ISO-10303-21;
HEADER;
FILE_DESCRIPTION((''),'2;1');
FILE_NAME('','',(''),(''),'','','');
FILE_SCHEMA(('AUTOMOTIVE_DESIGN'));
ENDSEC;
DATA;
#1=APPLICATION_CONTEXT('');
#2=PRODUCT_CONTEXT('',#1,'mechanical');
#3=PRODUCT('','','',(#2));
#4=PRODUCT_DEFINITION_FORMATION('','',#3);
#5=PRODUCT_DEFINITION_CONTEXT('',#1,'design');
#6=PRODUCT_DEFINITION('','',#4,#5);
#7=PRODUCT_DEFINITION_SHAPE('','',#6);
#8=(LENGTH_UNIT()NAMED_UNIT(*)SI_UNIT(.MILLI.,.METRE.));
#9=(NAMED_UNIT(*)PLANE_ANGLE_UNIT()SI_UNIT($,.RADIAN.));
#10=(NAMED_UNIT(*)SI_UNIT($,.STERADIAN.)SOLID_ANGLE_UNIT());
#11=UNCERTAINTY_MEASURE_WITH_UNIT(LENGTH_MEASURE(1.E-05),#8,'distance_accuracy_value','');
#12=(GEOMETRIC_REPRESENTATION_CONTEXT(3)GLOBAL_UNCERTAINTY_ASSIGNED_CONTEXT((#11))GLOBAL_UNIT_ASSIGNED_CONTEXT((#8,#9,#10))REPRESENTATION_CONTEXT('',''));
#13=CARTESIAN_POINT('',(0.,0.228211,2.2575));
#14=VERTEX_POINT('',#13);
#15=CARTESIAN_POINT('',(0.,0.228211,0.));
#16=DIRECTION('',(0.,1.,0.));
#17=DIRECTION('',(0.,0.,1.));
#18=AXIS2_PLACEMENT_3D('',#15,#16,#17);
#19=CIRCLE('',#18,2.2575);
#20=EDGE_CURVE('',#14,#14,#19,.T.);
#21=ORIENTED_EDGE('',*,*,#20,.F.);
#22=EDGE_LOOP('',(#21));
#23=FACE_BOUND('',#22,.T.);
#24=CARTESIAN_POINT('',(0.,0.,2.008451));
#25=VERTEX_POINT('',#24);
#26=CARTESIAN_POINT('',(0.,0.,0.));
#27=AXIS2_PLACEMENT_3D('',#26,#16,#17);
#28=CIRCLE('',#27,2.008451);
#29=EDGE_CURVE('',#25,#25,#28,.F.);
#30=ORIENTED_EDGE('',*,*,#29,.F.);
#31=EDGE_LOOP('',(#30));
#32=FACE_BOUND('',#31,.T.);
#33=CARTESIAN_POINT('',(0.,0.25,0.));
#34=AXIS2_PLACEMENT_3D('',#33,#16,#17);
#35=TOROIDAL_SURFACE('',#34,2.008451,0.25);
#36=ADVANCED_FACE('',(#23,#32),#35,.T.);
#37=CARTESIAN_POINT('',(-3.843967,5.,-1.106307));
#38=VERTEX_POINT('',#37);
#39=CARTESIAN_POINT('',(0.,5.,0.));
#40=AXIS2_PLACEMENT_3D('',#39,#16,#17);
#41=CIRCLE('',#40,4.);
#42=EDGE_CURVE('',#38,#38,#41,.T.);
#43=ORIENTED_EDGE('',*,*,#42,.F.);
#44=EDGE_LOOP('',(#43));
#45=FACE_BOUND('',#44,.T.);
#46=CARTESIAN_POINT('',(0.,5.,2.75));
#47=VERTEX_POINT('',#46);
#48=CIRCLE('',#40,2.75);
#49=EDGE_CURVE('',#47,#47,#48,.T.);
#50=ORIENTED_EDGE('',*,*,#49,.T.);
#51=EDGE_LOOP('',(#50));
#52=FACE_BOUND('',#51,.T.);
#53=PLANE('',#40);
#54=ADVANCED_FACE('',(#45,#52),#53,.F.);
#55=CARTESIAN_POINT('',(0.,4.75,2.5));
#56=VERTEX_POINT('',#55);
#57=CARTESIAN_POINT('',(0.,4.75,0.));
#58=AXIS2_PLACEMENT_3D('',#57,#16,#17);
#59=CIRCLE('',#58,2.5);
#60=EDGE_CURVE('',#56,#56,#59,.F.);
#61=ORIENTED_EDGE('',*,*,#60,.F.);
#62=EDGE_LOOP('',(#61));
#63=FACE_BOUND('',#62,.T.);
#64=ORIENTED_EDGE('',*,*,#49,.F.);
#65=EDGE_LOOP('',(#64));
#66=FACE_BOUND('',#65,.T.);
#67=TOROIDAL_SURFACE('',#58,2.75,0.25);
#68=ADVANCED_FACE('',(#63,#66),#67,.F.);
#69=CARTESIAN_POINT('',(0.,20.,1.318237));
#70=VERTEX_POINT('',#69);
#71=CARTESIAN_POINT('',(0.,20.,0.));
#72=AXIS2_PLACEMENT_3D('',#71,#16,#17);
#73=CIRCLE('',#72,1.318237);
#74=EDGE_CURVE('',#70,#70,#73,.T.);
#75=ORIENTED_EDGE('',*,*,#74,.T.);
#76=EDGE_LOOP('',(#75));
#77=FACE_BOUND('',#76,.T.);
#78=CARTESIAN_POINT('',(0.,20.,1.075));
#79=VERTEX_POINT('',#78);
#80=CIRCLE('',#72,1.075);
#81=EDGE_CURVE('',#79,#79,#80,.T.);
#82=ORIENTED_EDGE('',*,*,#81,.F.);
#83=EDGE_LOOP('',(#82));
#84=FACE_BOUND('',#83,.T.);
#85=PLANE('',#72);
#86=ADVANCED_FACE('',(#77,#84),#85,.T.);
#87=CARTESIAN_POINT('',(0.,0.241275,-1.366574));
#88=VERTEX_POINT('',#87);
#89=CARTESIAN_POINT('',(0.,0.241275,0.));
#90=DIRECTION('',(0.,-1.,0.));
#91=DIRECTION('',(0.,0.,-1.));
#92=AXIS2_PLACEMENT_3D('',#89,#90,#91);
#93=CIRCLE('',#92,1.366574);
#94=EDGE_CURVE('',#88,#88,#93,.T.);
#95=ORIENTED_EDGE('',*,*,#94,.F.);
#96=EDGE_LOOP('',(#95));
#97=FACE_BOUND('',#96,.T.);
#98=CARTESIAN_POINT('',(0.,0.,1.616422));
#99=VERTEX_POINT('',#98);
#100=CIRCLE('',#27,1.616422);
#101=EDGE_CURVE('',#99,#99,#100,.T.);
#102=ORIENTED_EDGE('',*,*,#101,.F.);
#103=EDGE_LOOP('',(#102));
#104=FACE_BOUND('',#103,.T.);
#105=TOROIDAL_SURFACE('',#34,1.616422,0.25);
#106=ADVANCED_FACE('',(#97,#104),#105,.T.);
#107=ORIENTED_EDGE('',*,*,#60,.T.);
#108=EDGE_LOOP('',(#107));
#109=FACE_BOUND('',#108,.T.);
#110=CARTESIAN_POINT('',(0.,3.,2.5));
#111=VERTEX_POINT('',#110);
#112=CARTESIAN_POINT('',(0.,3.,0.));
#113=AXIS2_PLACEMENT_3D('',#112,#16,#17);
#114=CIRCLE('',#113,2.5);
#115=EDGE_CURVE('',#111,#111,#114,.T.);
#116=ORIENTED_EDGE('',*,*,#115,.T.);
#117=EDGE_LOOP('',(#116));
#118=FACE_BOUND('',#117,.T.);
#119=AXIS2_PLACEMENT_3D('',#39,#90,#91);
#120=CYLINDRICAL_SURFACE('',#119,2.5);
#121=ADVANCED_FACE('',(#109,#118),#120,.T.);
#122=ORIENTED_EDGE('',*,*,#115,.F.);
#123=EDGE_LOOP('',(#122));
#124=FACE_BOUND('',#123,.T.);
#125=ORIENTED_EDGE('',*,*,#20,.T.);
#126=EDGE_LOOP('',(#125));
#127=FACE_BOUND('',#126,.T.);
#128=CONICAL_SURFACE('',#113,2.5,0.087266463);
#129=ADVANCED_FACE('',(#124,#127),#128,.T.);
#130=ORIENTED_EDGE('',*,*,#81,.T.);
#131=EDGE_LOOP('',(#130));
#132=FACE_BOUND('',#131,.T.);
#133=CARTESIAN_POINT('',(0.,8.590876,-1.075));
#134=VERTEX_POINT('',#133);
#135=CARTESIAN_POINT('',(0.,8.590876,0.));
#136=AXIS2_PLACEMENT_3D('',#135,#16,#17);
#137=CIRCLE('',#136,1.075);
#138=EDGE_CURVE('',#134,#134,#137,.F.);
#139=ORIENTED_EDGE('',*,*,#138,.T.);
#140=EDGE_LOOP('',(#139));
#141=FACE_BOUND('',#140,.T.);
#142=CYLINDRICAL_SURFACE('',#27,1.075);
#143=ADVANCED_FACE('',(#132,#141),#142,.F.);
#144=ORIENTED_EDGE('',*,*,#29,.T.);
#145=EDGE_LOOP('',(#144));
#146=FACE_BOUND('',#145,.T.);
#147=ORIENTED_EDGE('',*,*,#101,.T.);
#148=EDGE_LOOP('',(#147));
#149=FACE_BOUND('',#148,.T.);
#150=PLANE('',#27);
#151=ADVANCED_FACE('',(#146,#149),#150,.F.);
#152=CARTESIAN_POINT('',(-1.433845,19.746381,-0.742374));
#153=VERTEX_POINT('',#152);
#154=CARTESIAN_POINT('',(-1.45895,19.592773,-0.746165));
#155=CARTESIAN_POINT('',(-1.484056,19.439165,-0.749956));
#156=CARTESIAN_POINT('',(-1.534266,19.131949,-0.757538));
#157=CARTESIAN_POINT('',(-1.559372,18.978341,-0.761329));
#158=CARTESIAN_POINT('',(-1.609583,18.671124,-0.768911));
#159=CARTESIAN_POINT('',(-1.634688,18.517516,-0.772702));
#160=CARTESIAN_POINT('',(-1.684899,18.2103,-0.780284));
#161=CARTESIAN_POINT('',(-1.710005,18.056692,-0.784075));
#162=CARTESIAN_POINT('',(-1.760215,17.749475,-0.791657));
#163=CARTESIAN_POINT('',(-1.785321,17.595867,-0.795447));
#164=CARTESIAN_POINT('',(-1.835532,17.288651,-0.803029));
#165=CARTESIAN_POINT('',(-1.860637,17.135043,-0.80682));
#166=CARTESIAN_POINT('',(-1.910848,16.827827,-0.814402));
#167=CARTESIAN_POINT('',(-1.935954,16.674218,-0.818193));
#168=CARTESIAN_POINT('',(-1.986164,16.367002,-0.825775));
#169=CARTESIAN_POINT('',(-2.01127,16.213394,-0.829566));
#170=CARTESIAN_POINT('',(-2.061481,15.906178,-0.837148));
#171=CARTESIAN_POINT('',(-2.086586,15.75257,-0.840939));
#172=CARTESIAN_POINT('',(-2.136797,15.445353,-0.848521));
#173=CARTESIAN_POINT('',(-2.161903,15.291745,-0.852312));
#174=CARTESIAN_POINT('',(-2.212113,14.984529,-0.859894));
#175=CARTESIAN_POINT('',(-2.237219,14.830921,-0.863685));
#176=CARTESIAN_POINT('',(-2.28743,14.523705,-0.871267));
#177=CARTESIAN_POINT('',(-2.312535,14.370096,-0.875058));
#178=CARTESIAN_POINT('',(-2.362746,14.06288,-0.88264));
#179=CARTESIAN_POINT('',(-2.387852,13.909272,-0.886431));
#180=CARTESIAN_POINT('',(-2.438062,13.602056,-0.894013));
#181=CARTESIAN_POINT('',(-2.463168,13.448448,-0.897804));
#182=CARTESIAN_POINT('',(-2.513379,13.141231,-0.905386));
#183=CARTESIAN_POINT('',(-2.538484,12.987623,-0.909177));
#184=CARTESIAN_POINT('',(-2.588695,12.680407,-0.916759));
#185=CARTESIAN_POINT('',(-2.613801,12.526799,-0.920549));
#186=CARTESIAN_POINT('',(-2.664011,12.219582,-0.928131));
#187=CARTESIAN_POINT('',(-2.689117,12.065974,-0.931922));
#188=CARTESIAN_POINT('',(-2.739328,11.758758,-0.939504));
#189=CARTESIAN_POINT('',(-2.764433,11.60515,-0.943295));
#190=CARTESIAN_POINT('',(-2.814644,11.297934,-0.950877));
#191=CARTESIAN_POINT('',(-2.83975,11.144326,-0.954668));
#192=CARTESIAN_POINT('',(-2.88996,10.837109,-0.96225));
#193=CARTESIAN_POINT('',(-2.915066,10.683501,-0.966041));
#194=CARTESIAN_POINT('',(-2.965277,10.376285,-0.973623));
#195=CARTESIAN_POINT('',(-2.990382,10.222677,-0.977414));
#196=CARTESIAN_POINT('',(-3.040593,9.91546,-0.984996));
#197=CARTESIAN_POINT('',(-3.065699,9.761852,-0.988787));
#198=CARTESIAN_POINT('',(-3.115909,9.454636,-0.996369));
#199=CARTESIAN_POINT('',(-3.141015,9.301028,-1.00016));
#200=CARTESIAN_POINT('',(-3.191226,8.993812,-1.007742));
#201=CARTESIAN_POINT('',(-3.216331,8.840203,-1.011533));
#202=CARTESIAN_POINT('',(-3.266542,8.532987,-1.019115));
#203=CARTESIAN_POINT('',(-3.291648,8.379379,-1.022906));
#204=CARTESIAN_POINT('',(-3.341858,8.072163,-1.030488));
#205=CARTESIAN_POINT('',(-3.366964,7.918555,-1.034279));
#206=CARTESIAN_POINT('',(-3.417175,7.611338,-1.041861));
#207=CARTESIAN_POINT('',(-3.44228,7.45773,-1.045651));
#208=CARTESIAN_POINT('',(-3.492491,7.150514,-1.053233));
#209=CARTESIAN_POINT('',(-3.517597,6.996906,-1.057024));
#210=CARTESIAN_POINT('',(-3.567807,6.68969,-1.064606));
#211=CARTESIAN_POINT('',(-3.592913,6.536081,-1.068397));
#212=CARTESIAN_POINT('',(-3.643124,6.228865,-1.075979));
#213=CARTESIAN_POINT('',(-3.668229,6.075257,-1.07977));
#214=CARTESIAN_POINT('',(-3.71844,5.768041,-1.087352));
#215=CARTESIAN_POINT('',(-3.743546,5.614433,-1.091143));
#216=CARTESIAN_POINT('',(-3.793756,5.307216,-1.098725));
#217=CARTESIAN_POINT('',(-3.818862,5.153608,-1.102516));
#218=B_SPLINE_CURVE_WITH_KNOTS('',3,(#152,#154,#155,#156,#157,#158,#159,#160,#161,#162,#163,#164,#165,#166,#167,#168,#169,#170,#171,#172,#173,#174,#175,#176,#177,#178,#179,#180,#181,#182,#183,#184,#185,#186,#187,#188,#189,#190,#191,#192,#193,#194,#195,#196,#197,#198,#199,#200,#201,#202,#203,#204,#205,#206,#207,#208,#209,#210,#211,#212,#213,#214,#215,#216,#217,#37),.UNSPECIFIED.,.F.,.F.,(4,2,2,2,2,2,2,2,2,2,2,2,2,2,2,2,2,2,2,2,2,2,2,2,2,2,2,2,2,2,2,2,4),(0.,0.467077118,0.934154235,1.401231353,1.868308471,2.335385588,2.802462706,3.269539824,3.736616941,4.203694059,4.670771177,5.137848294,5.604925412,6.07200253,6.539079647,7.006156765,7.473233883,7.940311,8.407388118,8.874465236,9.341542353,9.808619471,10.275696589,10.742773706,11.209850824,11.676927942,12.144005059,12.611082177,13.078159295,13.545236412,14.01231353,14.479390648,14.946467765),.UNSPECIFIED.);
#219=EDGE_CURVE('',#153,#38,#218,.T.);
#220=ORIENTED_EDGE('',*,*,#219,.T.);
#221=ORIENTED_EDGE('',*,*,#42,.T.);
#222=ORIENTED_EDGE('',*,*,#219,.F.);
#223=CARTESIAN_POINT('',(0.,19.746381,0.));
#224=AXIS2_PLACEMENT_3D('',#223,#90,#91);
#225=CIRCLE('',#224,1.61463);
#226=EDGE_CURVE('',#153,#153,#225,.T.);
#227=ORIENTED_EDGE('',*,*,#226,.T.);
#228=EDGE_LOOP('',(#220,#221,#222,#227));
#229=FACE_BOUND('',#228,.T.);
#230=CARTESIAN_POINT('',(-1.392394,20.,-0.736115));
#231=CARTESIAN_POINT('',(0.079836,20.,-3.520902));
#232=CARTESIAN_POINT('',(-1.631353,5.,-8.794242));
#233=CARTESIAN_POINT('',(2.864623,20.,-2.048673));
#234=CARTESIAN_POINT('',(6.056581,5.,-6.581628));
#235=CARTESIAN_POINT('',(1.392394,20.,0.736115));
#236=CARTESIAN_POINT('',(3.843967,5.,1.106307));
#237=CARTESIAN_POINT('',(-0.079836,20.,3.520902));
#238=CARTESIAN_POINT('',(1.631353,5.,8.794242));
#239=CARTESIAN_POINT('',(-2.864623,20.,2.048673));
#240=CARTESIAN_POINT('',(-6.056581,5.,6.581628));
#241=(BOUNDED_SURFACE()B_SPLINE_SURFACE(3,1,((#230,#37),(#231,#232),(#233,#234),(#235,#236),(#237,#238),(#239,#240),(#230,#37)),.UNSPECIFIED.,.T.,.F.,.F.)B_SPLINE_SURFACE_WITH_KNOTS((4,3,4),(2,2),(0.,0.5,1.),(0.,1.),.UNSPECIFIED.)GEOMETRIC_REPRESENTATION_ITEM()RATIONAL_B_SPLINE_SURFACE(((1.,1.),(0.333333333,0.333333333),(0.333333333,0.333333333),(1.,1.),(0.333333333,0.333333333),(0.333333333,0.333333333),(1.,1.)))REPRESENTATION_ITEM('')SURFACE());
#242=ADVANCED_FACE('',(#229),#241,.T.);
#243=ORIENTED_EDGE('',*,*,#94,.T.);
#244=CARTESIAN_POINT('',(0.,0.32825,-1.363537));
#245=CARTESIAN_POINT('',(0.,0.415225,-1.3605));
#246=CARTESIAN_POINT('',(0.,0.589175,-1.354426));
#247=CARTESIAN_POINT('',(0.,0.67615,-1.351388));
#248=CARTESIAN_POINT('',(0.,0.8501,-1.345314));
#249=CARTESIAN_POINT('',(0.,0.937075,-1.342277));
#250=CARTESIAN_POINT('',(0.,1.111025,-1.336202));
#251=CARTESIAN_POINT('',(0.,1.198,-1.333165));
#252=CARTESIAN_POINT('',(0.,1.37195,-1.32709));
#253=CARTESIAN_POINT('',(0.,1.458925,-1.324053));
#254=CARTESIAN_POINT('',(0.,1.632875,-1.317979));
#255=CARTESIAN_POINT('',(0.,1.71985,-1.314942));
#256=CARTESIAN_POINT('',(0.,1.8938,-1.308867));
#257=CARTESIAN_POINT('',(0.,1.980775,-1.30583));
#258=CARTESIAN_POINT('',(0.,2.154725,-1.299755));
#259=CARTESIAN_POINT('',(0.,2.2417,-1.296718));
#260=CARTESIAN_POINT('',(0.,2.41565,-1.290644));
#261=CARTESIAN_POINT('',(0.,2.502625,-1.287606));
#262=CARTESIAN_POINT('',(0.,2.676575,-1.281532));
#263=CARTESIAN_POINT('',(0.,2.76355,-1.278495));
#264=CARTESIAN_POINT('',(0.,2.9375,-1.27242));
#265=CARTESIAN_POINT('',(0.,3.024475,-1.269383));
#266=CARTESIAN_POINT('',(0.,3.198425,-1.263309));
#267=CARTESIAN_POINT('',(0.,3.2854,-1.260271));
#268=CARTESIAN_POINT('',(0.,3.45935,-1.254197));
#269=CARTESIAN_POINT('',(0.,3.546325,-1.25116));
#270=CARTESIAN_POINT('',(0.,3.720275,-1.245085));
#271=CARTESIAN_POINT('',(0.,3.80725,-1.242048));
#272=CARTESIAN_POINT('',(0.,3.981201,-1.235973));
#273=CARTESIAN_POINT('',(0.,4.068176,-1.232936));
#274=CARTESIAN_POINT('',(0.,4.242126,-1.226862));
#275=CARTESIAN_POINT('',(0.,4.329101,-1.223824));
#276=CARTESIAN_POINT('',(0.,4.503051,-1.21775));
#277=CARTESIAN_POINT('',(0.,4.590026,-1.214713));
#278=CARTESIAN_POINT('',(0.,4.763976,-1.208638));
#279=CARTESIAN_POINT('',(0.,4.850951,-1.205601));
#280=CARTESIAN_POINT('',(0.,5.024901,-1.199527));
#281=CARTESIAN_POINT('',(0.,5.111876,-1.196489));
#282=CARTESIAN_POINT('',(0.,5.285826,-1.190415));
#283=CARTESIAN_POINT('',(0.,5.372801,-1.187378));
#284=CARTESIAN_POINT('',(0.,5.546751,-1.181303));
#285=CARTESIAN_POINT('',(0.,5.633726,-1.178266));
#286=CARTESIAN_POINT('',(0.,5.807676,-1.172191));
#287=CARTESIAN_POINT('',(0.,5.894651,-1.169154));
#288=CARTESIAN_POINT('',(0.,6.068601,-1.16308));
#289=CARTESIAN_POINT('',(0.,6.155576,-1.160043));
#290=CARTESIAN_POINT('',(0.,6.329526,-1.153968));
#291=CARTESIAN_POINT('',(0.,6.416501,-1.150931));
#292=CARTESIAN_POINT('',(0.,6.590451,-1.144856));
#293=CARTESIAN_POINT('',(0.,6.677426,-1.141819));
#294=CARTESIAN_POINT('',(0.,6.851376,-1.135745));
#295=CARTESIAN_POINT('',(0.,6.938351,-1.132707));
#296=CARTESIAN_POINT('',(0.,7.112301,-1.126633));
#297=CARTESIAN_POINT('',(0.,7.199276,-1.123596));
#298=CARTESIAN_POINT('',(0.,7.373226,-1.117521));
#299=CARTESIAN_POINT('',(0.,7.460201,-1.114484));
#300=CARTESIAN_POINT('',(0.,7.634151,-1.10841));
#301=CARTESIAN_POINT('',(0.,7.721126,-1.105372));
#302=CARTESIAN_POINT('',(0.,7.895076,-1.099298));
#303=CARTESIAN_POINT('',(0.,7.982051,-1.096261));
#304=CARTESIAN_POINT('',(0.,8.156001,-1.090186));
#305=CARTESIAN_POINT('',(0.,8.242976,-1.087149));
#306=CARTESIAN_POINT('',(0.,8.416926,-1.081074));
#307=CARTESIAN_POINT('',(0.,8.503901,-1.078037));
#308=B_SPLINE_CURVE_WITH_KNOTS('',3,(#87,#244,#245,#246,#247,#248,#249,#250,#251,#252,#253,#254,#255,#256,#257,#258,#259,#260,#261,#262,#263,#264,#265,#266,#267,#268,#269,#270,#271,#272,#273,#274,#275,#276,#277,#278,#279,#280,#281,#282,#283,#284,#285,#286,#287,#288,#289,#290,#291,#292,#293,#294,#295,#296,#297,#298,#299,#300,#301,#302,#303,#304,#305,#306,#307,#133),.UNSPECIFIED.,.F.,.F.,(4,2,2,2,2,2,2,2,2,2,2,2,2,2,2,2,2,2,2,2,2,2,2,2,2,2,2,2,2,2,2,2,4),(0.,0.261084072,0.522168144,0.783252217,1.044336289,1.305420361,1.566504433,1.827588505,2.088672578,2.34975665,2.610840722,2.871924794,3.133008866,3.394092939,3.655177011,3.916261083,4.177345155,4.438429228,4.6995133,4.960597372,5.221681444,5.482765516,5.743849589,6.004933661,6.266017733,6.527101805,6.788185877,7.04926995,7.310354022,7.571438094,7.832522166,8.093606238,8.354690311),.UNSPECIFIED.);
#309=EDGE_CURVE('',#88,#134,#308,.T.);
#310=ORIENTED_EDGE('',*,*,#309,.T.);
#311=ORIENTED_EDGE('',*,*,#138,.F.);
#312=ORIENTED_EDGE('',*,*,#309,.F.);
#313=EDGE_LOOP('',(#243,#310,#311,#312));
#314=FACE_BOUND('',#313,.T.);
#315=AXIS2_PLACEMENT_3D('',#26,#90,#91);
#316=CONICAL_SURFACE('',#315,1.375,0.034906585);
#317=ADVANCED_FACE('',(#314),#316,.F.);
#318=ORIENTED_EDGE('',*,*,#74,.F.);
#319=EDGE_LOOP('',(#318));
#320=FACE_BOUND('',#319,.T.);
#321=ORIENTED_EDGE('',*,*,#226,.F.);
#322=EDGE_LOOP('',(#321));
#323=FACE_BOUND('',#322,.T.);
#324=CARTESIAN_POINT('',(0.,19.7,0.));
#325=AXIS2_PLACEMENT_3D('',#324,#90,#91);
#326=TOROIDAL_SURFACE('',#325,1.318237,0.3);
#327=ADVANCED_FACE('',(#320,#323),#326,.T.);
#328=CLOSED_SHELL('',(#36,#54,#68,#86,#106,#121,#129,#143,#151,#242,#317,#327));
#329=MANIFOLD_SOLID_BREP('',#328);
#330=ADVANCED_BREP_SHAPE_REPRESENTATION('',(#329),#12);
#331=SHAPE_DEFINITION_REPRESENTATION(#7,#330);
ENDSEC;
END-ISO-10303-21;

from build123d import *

# Parameters (mm, degrees)
SKETCH1_R           = 2.5
BOSS_EXTRUDE1_DEPTH = 5
SKETCH4_R           = 1.075
CUT_EXTRUDE1_DEPTH  = 21.784609729
CHAMFER1_SIZE       = 0.3
CHAMFER1_SIZE2      = 8.590875985
CHAMFER2_SIZE       = 3
CHAMFER2_SIZE2      = 0.262465991
FILLET1_R           = 0.3
FILLET2_R           = 0.25
FILLET4_R           = 0.25


with BuildPart() as part:
    # Sketch1 → Boss-Extrude1 (new body)
    with BuildSketch(Plane(origin=(0, 0, 0), x_dir=(1, 0, 0), z_dir=(0, 1, 0))):
        with Locations(Location((0, 0, 0), (0, 0, 270))):
            Circle(SKETCH1_R)
    extrude(amount=BOSS_EXTRUDE1_DEPTH)

    # Loft1: read off the stored shape, not the designer's step
    # Loft1: loft between two sections, ruled curve by curve
    loft1_from = [
        Edge.make_bspline([(-1.392393657, 20, -0.736114736), (0.079835815, 20, -3.52090205), (2.864623129, 20, -2.048672577), (1.392393657, 20, 0.736114736), (-0.079835815, 20, 3.52090205), (-2.864623129, 20, 2.048672577), (-1.392393657, 20, -0.736114736)], [0, 0, 0, 0, 0.5, 0.5, 0.5, 1, 1, 1, 1], 3, [1, 0.333333333, 0.333333333, 1, 0.333333333, 0.333333333, 1]),
    ]
    loft1_to = [
        Edge.make_bspline([(-3.843967333, 5, -1.106306985), (-1.631353363, 5, -8.79424165), (6.056581302, 5, -6.581627681), (3.843967333, 5, 1.106306985), (1.631353363, 5, 8.79424165), (-6.056581302, 5, 6.581627681), (-3.843967333, 5, -1.106306985)], [0, 0, 0, 0, 0.5, 0.5, 0.5, 1, 1, 1, 1], 3, [1, 0.333333333, 0.333333333, 1, 0.333333333, 0.333333333, 1]),
    ]
    loft1 = Solid(Shell([*[Face.make_surface_from_curves(loft1_from[k], loft1_to[k]) for k in range(1)], Face(Wire(loft1_from)), Face(Wire(loft1_to))]))
    add(loft1)

    # Sketch4 → Cut-Extrude1 (cut, through all)
    with BuildSketch(Plane(origin=(0, 20, 0), x_dir=(1, 0, 0), z_dir=(0, 1, 0))):
        with Locations(Location((0, 0, 0), (0, 0, 270))):
            Circle(SKETCH4_R)
    extrude(amount=-CUT_EXTRUDE1_DEPTH, mode=Mode.SUBTRACT)

    # Chamfer1
    chamfer1_edges = [part.edges().sort_by_distance(p)[0] for p in [
        (0, 0, -1.075),
    ]]
    chamfer1_side = [part.faces().sort_by_distance(p)[0] for p in [
        (0, 0, -2.429289322),
    ]]
    chamfer(chamfer1_edges, length=CHAMFER1_SIZE, length2=CHAMFER1_SIZE2, reference=chamfer1_side[0])

    # Chamfer2
    chamfer2_edges = [part.edges().sort_by_distance(p)[0] for p in [
        (0, 0, -2.5),
    ]]
    chamfer2_side = [part.faces().sort_by_distance(p)[0] for p in [
        (0, 2.5, -2.5),
    ]]
    chamfer(chamfer2_edges, length=CHAMFER2_SIZE, length2=CHAMFER2_SIZE2, reference=chamfer2_side[0])

    # Fillet1
    fillet1_edges = [part.edges().sort_by_distance(p)[0] for p in [
        (1.392393657, 20, 0.736114736),
    ]]
    fillet(fillet1_edges, radius=FILLET1_R)

    # Fillet2
    fillet2_edges = [part.edges().sort_by_distance(p)[0] for p in [
        (0, 5, -2.5),
    ]]
    fillet(fillet2_edges, radius=FILLET2_R)

    # Fillet4
    fillet4_edges = [part.edges().sort_by_distance(p)[0] for p in [
        (0, 0, -1.375),
        (0, 0, -2.237534009),
    ]]
    fillet(fillet4_edges, radius=FILLET4_R)


solid = part.part
